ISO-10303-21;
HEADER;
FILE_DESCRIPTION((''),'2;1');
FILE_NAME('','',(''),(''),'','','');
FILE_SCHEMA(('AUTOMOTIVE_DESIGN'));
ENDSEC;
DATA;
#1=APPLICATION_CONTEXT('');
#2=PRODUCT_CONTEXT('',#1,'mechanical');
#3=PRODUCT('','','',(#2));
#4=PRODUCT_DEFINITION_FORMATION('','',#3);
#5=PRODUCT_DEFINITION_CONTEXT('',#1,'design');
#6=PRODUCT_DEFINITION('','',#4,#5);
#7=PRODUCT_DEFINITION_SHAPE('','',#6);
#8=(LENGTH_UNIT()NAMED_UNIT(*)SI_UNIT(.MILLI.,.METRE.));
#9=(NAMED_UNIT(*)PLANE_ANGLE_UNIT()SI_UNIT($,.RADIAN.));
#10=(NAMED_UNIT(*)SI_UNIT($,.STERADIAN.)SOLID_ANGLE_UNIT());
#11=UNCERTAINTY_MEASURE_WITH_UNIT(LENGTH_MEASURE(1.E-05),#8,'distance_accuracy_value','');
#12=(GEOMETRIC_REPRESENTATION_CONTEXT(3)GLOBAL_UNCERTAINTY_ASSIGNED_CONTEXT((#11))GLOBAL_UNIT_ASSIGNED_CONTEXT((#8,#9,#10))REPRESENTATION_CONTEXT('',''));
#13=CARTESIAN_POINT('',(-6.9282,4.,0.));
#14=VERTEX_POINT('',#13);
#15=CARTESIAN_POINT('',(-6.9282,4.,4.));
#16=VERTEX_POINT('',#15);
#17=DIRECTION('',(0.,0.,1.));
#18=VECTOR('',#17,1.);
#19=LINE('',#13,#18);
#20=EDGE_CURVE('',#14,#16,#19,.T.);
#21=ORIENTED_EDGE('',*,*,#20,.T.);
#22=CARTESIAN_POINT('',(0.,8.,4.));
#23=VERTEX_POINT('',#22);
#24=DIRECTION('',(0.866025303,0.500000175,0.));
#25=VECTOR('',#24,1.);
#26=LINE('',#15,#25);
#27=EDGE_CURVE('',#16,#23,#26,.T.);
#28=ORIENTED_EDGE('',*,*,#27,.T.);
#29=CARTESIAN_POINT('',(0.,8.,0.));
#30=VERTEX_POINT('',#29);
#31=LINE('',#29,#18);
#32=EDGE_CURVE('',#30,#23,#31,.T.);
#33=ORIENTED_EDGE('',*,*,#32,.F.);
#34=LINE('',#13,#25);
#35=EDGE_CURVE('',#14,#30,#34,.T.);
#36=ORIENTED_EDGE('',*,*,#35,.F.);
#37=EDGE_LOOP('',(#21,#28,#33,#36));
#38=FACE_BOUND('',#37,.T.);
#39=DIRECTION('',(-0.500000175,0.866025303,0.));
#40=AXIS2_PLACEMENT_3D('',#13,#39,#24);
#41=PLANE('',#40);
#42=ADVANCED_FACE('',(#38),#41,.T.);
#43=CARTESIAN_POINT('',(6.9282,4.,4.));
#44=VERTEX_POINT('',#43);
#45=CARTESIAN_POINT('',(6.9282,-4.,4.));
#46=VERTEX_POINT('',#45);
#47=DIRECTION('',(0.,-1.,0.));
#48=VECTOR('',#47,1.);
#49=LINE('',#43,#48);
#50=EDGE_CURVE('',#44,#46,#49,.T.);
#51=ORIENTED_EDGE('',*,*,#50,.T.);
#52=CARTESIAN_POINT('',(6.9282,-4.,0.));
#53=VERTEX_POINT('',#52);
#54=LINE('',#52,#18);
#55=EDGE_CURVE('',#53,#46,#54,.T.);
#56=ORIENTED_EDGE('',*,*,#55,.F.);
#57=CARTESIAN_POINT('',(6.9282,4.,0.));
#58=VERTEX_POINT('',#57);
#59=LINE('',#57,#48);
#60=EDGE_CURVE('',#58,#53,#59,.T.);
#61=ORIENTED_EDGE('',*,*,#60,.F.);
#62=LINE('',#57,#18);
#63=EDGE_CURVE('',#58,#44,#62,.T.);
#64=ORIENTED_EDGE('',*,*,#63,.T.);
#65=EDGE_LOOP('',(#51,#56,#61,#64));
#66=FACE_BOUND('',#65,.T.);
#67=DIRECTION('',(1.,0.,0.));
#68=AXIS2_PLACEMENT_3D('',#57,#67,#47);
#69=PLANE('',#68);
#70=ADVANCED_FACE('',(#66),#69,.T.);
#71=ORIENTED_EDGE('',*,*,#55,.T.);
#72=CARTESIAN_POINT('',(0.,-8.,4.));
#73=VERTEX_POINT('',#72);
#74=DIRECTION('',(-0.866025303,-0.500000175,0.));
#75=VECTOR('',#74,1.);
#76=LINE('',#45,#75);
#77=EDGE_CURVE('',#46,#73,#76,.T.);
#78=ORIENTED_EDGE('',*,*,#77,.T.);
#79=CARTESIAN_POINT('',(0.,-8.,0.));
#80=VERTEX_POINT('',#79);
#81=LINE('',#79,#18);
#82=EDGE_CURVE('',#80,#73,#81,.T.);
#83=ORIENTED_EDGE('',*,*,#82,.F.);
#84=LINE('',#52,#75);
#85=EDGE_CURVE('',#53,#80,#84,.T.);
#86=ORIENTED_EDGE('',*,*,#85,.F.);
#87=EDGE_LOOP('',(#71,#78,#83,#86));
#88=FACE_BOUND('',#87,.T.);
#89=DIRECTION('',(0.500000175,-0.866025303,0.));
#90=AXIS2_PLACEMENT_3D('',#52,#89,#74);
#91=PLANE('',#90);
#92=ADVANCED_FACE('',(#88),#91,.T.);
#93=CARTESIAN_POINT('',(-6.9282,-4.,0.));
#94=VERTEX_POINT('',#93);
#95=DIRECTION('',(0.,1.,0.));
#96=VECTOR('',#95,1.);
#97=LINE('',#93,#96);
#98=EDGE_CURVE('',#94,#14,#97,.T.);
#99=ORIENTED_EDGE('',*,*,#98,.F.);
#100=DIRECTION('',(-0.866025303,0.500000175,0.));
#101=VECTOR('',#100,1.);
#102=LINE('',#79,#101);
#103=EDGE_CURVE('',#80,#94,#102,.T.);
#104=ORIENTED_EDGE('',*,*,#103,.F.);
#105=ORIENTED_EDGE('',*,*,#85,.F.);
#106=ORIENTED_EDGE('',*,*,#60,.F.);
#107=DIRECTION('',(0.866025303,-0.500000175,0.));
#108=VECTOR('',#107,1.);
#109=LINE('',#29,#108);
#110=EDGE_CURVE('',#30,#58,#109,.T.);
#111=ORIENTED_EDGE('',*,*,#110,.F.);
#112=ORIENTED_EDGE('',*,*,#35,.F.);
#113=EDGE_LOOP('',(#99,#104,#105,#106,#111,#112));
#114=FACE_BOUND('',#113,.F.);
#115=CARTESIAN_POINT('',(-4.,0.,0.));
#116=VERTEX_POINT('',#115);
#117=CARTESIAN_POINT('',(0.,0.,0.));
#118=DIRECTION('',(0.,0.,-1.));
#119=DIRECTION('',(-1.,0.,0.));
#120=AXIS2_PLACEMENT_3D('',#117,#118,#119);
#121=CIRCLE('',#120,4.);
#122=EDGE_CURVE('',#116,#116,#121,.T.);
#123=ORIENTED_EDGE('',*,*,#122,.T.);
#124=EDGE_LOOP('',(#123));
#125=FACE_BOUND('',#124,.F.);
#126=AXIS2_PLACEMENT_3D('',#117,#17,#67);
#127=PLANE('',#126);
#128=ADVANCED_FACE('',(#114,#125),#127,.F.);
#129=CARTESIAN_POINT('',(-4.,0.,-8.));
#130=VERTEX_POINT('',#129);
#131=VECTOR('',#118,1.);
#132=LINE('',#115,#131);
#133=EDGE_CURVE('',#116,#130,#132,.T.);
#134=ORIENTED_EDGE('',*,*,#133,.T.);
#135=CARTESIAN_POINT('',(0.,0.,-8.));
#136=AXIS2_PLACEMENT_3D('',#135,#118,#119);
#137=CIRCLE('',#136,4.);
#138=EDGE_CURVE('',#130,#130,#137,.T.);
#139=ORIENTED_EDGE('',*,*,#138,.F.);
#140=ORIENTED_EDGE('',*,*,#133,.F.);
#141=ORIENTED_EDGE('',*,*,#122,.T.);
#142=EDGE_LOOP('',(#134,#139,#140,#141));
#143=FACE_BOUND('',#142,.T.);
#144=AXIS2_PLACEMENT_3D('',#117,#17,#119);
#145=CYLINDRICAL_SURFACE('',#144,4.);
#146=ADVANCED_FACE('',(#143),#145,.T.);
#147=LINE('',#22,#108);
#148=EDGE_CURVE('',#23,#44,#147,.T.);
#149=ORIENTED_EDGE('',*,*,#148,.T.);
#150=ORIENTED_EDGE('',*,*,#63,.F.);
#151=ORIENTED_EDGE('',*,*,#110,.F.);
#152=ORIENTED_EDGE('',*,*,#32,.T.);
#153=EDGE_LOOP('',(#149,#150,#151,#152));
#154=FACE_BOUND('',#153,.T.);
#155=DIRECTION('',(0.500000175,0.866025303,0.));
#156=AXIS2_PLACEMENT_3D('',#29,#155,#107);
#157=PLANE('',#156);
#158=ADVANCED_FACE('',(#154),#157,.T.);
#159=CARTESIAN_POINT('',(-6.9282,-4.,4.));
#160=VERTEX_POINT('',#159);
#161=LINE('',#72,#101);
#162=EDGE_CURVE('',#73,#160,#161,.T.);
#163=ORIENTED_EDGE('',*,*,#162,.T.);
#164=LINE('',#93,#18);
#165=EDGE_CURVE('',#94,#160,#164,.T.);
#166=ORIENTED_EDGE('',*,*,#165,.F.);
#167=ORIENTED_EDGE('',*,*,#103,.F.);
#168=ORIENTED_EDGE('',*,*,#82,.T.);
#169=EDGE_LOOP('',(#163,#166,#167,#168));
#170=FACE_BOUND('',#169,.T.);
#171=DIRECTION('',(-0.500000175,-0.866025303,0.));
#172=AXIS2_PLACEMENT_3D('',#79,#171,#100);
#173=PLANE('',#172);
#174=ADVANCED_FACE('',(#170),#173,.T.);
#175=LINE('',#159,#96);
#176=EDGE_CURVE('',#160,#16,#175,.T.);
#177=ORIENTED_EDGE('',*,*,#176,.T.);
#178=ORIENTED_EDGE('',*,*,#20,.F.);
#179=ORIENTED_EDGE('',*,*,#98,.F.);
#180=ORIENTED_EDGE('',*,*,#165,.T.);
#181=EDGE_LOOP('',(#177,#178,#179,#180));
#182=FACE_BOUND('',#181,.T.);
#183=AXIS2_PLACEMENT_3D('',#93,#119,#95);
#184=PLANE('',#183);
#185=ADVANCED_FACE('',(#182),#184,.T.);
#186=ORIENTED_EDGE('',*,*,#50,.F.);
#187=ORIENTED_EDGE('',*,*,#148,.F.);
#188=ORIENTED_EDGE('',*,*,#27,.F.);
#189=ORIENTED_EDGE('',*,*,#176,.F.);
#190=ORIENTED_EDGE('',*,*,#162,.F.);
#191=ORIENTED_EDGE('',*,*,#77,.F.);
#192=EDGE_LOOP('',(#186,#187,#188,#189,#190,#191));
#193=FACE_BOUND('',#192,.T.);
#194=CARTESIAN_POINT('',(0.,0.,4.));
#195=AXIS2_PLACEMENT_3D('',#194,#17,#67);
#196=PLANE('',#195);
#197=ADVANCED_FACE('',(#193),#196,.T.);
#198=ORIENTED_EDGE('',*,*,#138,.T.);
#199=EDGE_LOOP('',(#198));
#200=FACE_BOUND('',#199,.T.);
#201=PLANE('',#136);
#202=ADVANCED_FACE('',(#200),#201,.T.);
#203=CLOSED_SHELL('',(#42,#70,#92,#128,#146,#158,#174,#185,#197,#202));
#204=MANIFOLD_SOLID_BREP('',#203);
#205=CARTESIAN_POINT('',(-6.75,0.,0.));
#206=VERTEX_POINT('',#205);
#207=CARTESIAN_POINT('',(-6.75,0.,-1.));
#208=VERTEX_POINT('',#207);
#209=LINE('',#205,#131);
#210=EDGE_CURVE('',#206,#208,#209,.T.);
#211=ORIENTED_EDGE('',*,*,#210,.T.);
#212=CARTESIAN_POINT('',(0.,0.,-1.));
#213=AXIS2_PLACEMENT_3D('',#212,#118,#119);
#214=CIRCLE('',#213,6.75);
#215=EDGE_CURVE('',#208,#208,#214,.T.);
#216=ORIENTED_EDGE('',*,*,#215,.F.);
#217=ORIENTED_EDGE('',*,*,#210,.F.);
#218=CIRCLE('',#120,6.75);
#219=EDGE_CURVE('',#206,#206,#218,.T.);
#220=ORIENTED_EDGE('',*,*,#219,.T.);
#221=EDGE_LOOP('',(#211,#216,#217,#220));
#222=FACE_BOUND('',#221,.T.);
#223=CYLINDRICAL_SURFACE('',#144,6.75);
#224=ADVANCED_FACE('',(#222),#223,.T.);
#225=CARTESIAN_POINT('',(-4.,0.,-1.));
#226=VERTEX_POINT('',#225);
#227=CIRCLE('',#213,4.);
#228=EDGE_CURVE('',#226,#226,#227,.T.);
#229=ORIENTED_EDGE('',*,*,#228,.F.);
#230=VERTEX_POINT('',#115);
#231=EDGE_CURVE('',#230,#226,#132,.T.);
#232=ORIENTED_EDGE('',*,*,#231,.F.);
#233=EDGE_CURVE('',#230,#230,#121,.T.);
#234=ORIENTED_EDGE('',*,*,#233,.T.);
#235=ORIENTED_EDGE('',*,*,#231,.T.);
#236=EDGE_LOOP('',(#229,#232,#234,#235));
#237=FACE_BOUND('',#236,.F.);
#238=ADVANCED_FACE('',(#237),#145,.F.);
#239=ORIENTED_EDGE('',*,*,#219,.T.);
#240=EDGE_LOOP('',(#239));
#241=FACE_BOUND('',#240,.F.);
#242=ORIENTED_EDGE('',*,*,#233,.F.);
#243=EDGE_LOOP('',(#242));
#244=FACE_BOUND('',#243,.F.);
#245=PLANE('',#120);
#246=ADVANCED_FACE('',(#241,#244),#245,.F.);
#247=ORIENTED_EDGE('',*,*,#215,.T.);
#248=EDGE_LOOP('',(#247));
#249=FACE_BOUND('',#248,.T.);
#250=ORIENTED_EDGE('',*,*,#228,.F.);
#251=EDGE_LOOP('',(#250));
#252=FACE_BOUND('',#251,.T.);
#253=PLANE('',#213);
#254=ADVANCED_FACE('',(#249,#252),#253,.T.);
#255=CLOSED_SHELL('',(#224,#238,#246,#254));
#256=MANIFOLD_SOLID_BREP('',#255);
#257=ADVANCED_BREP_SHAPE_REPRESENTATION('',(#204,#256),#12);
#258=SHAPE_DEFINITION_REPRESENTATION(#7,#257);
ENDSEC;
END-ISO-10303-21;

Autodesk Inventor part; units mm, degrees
ref_plane "YZ Plane" through (0, 0, 0) normal (1, 0, 0) x (0, 1, 0)
ref_plane "XZ Plane" through (0, 0, 0) normal (0, 1, 0) x (-1, 0, 0)
ref_plane "XY Plane" through (0, 0, 0) normal (0, 0, 1) x (1, 0, 0)
sketch "Sketch1" plane through (0, 0, 0) normal (0, 0, 1) x (1, 0, 0)
  line L0 (0, 8) -> (6.9282, 4)
  line L1 (6.9282, 4) -> (6.9282, -4)
  line L2 (6.9282, -4) -> (0, -8)
  line L3 (0, -8) -> (-6.9282, -4)
  line L4 (-6.9282, -4) -> (-6.9282, 4)
  line L5 (-6.9282, 4) -> (0, 8)
  point P0 (0, 0)
  point P1 (0, 0)
  point P2 (-6.9282, 0)
  dimension "d0" = 16
extrude "Extrusion1" add sketch "Sketch1" along normal blind 4
sketch "Sketch2" plane through (0, 0, 0) normal (0, 0, -1) x (-1, 0, 0)
  circle A0 centre (0, 0) radius 4
  dimension "d3" = 8
extrude "Extrusion2" add sketch "Sketch2" along normal blind 8
sketch "Sketch3" plane through (0, 0, 0) normal (0, 0, -1) x (-1, 0, 0)
  circle A0 centre (0, 0) radius 6.75
  circle A1 centre (0, 0) radius 4
  dimension "d6" = 13.5
  dimension "d7" = 8
extrude "Extrusion3" add sketch "Sketch3" along normal blind 1 separate body
thread "Thread1" size "M8x1.25" class "6g" standard "ISO Metric profile" length 7
properties part number "123 cap"
